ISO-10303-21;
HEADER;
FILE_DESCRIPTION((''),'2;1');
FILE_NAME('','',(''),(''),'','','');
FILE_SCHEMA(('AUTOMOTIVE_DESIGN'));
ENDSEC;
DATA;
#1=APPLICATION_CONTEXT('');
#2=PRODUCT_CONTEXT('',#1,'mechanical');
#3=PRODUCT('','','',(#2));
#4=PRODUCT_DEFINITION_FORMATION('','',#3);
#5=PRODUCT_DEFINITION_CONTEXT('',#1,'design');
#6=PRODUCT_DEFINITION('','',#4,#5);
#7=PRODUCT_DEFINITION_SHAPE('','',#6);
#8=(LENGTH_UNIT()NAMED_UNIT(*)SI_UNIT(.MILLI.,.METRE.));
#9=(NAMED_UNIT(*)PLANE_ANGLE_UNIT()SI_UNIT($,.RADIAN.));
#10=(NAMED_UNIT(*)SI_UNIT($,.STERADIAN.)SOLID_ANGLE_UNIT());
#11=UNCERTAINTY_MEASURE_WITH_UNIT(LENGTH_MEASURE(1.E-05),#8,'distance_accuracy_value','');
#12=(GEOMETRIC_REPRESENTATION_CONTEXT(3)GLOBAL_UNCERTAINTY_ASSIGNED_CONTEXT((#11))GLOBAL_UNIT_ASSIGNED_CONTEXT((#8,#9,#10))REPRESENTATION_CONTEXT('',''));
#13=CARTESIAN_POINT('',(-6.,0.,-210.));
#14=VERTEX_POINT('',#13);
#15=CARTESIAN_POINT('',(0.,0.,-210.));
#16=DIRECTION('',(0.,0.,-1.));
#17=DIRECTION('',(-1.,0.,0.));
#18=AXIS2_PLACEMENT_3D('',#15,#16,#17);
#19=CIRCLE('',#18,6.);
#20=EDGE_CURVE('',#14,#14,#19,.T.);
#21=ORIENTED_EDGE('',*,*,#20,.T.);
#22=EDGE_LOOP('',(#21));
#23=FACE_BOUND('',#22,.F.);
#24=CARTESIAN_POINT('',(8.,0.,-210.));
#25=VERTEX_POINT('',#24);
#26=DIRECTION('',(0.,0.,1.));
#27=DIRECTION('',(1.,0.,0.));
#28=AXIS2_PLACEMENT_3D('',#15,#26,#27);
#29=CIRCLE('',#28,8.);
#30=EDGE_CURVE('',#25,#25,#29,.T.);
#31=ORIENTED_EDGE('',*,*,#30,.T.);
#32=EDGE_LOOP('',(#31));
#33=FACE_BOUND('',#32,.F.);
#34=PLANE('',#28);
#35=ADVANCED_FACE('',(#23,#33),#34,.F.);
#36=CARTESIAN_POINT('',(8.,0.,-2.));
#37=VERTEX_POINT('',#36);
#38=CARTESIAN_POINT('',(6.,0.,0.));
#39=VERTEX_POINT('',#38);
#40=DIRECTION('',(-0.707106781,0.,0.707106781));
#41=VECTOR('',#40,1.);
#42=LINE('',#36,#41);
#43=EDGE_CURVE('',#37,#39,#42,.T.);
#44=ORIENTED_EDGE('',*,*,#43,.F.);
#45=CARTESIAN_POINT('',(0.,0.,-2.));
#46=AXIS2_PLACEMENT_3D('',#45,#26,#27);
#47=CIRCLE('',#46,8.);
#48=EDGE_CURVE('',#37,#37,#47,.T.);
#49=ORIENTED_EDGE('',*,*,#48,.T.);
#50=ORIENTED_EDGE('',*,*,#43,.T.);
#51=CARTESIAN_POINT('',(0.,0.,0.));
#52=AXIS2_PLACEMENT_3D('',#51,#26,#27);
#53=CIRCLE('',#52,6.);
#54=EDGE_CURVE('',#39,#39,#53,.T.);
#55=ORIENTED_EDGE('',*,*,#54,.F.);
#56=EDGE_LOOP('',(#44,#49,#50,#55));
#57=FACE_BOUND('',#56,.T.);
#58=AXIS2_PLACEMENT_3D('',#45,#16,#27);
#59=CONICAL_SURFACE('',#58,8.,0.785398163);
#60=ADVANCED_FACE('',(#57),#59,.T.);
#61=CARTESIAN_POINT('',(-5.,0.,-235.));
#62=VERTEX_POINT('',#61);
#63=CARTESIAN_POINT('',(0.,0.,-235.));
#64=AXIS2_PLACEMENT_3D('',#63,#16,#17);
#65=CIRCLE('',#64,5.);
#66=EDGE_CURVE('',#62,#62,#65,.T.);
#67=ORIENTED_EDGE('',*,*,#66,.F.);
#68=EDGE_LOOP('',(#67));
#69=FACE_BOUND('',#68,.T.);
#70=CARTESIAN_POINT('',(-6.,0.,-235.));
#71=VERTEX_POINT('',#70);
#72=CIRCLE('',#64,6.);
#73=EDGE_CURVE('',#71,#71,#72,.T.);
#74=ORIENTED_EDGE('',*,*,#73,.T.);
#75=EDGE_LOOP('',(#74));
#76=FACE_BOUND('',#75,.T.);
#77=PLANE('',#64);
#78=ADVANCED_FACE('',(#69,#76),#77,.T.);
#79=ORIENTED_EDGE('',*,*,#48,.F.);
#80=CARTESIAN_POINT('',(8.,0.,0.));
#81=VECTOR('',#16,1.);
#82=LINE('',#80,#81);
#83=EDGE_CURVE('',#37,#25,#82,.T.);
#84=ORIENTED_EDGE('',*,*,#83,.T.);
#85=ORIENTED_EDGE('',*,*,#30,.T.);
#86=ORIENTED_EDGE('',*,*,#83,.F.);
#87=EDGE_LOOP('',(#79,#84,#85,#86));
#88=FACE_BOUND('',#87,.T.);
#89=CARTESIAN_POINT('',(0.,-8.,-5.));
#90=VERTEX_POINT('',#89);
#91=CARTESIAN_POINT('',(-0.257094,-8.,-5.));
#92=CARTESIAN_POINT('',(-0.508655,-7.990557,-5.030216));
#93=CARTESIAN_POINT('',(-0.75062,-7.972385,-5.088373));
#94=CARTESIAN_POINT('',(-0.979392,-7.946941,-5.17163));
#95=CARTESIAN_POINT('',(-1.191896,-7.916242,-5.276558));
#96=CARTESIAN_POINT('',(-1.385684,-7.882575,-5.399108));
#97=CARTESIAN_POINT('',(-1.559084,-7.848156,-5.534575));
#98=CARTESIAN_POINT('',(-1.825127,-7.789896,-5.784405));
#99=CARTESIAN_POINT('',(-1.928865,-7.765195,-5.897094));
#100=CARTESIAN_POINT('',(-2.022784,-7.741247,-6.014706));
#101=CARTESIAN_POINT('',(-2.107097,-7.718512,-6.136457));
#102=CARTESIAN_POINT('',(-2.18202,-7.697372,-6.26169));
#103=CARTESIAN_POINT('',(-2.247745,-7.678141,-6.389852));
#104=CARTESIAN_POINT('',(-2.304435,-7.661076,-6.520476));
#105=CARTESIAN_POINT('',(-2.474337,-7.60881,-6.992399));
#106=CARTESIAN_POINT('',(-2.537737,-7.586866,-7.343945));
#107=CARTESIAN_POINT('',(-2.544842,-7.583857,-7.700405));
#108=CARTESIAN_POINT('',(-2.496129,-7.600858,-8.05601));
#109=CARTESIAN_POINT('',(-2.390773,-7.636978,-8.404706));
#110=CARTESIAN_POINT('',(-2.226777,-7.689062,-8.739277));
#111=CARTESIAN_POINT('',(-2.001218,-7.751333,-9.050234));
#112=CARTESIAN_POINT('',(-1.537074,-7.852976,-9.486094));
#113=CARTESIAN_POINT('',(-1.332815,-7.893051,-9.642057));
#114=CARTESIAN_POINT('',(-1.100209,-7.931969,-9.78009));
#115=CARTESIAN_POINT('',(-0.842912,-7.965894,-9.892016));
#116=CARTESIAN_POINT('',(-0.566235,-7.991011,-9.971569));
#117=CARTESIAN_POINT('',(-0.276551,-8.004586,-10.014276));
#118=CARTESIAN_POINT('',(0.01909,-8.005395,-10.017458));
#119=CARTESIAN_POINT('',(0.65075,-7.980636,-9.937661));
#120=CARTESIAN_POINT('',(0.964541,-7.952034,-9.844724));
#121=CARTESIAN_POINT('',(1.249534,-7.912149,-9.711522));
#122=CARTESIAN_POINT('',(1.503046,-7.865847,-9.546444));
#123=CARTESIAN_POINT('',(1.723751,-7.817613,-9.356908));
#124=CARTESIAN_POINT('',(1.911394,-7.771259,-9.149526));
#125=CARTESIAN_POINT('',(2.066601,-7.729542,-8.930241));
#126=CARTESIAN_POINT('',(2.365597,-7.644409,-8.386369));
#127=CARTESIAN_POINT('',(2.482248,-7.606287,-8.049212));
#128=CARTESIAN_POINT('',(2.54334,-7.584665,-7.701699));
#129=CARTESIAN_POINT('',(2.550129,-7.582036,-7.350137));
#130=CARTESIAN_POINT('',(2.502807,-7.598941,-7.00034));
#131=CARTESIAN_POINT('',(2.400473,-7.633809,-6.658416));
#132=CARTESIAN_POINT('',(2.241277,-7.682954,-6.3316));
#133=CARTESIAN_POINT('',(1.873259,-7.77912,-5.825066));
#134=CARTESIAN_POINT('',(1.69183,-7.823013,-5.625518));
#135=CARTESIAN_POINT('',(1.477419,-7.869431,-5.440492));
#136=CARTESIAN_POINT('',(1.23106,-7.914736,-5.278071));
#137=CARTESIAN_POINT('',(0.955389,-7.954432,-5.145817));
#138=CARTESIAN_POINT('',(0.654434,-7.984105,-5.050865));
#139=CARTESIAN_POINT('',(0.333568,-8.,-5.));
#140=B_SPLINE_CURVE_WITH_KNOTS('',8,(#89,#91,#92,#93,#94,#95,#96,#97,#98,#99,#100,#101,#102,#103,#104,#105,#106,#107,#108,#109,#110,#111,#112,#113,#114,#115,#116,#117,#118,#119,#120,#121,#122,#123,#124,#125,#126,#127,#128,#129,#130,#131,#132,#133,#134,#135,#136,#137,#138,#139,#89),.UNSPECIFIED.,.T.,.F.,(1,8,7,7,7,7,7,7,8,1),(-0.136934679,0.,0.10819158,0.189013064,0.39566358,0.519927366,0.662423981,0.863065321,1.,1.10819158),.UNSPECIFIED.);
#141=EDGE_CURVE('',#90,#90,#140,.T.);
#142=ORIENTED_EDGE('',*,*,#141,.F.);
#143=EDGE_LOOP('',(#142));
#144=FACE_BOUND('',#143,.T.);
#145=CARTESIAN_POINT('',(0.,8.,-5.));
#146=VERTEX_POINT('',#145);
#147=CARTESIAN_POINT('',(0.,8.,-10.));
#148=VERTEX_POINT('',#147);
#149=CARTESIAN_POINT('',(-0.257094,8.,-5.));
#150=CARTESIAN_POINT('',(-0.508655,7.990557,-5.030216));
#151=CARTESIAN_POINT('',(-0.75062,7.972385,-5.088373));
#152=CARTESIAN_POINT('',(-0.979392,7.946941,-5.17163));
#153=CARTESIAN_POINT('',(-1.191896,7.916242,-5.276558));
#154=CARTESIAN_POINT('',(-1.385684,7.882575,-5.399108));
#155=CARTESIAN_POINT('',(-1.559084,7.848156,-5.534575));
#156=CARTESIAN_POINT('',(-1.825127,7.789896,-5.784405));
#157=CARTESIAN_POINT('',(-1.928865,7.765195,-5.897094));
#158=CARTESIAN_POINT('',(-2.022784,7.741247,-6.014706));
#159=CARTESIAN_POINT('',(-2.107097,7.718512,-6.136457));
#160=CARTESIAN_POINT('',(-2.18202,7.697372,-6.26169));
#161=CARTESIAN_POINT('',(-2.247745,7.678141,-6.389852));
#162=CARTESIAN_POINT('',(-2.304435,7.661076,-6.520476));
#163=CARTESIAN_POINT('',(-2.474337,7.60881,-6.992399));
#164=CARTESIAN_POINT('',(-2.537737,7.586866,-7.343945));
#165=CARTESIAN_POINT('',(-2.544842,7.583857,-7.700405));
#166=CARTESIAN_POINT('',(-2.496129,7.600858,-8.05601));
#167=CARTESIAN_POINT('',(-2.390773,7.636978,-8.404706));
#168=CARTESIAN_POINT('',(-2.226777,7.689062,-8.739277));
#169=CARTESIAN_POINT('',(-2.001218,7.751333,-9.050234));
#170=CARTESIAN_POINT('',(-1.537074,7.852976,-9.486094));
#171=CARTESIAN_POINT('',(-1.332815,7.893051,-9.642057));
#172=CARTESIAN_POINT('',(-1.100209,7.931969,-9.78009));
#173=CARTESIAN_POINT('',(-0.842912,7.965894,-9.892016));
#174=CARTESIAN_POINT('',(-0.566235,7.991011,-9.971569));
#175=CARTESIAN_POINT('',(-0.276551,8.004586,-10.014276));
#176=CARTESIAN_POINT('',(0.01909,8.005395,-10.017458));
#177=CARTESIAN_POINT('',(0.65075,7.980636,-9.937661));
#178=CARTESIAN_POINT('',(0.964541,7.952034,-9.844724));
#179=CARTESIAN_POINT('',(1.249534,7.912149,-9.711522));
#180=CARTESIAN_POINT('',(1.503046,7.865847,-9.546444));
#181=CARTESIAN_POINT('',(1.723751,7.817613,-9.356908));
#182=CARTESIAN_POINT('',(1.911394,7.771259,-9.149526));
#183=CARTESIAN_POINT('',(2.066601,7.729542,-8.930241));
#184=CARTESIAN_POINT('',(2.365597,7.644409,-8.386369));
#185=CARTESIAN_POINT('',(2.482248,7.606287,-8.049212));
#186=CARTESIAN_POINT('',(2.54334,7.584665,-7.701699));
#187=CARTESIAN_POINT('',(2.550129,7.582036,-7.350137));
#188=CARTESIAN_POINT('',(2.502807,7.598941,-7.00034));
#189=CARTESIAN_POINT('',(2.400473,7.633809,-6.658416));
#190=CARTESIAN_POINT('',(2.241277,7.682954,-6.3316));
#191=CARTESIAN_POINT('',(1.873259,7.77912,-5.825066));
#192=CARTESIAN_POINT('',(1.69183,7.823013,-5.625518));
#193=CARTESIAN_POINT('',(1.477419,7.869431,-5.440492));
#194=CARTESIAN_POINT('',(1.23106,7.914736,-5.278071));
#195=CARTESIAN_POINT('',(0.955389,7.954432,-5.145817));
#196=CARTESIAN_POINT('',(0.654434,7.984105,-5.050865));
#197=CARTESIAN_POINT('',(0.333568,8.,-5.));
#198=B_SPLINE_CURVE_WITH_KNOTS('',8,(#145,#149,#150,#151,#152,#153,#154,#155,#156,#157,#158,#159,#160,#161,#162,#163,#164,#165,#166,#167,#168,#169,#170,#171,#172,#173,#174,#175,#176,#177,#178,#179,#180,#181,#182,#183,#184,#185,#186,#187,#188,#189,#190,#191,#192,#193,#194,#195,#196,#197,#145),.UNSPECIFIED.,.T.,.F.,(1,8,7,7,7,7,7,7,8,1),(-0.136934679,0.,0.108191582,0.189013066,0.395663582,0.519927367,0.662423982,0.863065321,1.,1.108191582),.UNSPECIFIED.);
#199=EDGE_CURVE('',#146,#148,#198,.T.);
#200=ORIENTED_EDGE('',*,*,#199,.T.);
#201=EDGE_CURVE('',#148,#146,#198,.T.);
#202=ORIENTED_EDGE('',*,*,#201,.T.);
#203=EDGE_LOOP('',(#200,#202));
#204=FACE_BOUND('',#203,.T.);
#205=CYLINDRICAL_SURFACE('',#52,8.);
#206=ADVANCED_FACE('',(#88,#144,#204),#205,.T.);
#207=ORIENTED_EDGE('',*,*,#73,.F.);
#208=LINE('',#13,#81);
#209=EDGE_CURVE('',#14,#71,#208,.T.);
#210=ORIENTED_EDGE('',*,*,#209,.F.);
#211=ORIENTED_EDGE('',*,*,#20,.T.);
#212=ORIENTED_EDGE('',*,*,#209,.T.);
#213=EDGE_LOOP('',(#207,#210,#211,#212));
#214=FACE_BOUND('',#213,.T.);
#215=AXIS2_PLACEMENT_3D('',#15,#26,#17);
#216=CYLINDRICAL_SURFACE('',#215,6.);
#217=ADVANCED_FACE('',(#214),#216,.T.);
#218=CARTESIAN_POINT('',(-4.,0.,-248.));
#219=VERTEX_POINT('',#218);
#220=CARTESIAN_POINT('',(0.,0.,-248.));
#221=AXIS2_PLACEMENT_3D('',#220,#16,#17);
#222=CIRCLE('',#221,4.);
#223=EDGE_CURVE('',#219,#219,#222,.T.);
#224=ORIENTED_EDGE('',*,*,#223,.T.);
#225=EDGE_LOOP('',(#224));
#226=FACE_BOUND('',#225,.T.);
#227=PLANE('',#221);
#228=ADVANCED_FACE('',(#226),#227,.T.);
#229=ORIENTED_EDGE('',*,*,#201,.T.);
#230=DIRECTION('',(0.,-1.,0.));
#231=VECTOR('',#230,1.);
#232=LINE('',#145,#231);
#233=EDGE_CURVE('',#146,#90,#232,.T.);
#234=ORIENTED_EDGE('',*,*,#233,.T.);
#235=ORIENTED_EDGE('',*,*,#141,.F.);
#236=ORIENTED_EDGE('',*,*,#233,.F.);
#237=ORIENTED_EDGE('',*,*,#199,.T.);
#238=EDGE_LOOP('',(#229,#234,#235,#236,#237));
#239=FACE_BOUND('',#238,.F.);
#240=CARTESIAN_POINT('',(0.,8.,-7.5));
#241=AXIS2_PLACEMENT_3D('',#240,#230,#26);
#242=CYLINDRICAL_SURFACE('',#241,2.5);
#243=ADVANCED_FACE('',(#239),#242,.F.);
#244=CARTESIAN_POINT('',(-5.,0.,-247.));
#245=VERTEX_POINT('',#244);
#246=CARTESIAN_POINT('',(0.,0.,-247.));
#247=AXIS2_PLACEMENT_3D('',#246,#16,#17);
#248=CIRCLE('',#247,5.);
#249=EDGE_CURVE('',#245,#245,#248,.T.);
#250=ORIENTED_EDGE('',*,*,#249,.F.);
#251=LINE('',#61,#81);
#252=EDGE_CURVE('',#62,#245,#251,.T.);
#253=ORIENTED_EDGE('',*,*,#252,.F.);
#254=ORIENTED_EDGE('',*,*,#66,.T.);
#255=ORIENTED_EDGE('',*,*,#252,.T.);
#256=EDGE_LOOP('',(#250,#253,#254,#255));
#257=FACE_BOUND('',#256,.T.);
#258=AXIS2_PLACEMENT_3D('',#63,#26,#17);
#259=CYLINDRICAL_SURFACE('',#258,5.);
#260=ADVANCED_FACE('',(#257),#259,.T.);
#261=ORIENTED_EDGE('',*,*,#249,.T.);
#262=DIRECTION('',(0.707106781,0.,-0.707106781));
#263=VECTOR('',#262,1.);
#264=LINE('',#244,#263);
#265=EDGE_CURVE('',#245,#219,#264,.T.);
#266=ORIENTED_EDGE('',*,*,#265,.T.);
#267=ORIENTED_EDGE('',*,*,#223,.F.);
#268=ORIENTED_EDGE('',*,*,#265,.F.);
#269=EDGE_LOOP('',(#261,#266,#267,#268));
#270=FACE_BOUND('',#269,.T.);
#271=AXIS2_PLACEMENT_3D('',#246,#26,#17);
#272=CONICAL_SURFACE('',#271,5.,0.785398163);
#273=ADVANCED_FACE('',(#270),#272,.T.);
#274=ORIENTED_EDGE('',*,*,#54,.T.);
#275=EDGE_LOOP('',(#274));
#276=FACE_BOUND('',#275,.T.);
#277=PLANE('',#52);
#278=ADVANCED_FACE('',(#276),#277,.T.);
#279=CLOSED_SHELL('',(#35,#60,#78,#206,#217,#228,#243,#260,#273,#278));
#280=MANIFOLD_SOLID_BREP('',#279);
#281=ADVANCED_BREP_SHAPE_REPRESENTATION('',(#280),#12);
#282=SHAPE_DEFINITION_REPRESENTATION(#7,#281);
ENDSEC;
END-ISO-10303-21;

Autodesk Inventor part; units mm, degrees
ref_plane "YZ Plane" through (0, 0, 0) normal (1, 0, 0) x (0, 1, 0)
ref_plane "XZ Plane" through (0, 0, 0) normal (0, 1, 0) x (-1, 0, 0)
ref_plane "XY Plane" through (0, 0, 0) normal (0, 0, 1) x (1, 0, 0)
sketch "Szkic1" plane through (0, 0, 0) normal (0, 0, 1) x (1, 0, 0)
  circle A0 centre (0, 0) radius 8
  dimension "d0" = 16
extrude "Wyciągnięcie proste1" add sketch "Szkic1" against normal blind 210
sketch "Szkic2" plane through (0, 0, 0) normal (0, 0, 1) x (1, 0, 0)
  line L0 (0, 0) -> (0, 8)
  circle A0 centre (0, 0) radius 8 projected
  circle A1 centre (0, 0) radius 8 projected
  circle A2 centre (0, 0) radius 8 projected
sketch3d "Szkic 3D1"
sketch "Szkic3" plane through (0, 0, 0) normal (0, 0, 1) x (1, 0, 0)
  circle A0 centre (0, 0) radius 8
  circle A1 centre (0, 0) radius 8
  point P0 (0, 8)
sketch3d "Szkic 3D2"
sketch "Szkic4" plane through (0, 0, 0) normal (0, 0, 1) x (1, 0, 0)
  circle A0 centre (0, 0) radius 8 projected
  circle A1 centre (0, 0) radius 8 projected
  point P0 (0, 8)
hole "Otwór1" at (0, 8, -7.5) direction (0, -1, 0) diameter 5 end through all
chamfer "Faza2" distance 2 angle 45 1 edges at (-8, 0, 0)
sketch "Szkic6" plane through (0, 0, -210) normal (0, 0, -1) x (-1, 0, 0)
  point P0 (0, 0)
sketch "Szkic7" plane through (0, 0, -210) normal (0, 0, -1) x (-1, 0, 0)
  circle A0 centre (0, 0) radius 6
extrude "Wyciągnięcie proste2" add sketch "Szkic7" along normal blind 25
sketch "Szkic8" plane through (0, 0, -235) normal (0, 0, -1) x (-1, 0, 0)
  circle A0 centre (0, 0) radius 5
extrude "Wyciągnięcie proste3" add sketch "Szkic8" along normal blind 13
chamfer "Faza3" distance 1 angle 45 1 edges at (5, 0, -248)
thread "Gwint1" size "M10x1.5" class "6g" standard "ANSI Metric M Profile" length 10
